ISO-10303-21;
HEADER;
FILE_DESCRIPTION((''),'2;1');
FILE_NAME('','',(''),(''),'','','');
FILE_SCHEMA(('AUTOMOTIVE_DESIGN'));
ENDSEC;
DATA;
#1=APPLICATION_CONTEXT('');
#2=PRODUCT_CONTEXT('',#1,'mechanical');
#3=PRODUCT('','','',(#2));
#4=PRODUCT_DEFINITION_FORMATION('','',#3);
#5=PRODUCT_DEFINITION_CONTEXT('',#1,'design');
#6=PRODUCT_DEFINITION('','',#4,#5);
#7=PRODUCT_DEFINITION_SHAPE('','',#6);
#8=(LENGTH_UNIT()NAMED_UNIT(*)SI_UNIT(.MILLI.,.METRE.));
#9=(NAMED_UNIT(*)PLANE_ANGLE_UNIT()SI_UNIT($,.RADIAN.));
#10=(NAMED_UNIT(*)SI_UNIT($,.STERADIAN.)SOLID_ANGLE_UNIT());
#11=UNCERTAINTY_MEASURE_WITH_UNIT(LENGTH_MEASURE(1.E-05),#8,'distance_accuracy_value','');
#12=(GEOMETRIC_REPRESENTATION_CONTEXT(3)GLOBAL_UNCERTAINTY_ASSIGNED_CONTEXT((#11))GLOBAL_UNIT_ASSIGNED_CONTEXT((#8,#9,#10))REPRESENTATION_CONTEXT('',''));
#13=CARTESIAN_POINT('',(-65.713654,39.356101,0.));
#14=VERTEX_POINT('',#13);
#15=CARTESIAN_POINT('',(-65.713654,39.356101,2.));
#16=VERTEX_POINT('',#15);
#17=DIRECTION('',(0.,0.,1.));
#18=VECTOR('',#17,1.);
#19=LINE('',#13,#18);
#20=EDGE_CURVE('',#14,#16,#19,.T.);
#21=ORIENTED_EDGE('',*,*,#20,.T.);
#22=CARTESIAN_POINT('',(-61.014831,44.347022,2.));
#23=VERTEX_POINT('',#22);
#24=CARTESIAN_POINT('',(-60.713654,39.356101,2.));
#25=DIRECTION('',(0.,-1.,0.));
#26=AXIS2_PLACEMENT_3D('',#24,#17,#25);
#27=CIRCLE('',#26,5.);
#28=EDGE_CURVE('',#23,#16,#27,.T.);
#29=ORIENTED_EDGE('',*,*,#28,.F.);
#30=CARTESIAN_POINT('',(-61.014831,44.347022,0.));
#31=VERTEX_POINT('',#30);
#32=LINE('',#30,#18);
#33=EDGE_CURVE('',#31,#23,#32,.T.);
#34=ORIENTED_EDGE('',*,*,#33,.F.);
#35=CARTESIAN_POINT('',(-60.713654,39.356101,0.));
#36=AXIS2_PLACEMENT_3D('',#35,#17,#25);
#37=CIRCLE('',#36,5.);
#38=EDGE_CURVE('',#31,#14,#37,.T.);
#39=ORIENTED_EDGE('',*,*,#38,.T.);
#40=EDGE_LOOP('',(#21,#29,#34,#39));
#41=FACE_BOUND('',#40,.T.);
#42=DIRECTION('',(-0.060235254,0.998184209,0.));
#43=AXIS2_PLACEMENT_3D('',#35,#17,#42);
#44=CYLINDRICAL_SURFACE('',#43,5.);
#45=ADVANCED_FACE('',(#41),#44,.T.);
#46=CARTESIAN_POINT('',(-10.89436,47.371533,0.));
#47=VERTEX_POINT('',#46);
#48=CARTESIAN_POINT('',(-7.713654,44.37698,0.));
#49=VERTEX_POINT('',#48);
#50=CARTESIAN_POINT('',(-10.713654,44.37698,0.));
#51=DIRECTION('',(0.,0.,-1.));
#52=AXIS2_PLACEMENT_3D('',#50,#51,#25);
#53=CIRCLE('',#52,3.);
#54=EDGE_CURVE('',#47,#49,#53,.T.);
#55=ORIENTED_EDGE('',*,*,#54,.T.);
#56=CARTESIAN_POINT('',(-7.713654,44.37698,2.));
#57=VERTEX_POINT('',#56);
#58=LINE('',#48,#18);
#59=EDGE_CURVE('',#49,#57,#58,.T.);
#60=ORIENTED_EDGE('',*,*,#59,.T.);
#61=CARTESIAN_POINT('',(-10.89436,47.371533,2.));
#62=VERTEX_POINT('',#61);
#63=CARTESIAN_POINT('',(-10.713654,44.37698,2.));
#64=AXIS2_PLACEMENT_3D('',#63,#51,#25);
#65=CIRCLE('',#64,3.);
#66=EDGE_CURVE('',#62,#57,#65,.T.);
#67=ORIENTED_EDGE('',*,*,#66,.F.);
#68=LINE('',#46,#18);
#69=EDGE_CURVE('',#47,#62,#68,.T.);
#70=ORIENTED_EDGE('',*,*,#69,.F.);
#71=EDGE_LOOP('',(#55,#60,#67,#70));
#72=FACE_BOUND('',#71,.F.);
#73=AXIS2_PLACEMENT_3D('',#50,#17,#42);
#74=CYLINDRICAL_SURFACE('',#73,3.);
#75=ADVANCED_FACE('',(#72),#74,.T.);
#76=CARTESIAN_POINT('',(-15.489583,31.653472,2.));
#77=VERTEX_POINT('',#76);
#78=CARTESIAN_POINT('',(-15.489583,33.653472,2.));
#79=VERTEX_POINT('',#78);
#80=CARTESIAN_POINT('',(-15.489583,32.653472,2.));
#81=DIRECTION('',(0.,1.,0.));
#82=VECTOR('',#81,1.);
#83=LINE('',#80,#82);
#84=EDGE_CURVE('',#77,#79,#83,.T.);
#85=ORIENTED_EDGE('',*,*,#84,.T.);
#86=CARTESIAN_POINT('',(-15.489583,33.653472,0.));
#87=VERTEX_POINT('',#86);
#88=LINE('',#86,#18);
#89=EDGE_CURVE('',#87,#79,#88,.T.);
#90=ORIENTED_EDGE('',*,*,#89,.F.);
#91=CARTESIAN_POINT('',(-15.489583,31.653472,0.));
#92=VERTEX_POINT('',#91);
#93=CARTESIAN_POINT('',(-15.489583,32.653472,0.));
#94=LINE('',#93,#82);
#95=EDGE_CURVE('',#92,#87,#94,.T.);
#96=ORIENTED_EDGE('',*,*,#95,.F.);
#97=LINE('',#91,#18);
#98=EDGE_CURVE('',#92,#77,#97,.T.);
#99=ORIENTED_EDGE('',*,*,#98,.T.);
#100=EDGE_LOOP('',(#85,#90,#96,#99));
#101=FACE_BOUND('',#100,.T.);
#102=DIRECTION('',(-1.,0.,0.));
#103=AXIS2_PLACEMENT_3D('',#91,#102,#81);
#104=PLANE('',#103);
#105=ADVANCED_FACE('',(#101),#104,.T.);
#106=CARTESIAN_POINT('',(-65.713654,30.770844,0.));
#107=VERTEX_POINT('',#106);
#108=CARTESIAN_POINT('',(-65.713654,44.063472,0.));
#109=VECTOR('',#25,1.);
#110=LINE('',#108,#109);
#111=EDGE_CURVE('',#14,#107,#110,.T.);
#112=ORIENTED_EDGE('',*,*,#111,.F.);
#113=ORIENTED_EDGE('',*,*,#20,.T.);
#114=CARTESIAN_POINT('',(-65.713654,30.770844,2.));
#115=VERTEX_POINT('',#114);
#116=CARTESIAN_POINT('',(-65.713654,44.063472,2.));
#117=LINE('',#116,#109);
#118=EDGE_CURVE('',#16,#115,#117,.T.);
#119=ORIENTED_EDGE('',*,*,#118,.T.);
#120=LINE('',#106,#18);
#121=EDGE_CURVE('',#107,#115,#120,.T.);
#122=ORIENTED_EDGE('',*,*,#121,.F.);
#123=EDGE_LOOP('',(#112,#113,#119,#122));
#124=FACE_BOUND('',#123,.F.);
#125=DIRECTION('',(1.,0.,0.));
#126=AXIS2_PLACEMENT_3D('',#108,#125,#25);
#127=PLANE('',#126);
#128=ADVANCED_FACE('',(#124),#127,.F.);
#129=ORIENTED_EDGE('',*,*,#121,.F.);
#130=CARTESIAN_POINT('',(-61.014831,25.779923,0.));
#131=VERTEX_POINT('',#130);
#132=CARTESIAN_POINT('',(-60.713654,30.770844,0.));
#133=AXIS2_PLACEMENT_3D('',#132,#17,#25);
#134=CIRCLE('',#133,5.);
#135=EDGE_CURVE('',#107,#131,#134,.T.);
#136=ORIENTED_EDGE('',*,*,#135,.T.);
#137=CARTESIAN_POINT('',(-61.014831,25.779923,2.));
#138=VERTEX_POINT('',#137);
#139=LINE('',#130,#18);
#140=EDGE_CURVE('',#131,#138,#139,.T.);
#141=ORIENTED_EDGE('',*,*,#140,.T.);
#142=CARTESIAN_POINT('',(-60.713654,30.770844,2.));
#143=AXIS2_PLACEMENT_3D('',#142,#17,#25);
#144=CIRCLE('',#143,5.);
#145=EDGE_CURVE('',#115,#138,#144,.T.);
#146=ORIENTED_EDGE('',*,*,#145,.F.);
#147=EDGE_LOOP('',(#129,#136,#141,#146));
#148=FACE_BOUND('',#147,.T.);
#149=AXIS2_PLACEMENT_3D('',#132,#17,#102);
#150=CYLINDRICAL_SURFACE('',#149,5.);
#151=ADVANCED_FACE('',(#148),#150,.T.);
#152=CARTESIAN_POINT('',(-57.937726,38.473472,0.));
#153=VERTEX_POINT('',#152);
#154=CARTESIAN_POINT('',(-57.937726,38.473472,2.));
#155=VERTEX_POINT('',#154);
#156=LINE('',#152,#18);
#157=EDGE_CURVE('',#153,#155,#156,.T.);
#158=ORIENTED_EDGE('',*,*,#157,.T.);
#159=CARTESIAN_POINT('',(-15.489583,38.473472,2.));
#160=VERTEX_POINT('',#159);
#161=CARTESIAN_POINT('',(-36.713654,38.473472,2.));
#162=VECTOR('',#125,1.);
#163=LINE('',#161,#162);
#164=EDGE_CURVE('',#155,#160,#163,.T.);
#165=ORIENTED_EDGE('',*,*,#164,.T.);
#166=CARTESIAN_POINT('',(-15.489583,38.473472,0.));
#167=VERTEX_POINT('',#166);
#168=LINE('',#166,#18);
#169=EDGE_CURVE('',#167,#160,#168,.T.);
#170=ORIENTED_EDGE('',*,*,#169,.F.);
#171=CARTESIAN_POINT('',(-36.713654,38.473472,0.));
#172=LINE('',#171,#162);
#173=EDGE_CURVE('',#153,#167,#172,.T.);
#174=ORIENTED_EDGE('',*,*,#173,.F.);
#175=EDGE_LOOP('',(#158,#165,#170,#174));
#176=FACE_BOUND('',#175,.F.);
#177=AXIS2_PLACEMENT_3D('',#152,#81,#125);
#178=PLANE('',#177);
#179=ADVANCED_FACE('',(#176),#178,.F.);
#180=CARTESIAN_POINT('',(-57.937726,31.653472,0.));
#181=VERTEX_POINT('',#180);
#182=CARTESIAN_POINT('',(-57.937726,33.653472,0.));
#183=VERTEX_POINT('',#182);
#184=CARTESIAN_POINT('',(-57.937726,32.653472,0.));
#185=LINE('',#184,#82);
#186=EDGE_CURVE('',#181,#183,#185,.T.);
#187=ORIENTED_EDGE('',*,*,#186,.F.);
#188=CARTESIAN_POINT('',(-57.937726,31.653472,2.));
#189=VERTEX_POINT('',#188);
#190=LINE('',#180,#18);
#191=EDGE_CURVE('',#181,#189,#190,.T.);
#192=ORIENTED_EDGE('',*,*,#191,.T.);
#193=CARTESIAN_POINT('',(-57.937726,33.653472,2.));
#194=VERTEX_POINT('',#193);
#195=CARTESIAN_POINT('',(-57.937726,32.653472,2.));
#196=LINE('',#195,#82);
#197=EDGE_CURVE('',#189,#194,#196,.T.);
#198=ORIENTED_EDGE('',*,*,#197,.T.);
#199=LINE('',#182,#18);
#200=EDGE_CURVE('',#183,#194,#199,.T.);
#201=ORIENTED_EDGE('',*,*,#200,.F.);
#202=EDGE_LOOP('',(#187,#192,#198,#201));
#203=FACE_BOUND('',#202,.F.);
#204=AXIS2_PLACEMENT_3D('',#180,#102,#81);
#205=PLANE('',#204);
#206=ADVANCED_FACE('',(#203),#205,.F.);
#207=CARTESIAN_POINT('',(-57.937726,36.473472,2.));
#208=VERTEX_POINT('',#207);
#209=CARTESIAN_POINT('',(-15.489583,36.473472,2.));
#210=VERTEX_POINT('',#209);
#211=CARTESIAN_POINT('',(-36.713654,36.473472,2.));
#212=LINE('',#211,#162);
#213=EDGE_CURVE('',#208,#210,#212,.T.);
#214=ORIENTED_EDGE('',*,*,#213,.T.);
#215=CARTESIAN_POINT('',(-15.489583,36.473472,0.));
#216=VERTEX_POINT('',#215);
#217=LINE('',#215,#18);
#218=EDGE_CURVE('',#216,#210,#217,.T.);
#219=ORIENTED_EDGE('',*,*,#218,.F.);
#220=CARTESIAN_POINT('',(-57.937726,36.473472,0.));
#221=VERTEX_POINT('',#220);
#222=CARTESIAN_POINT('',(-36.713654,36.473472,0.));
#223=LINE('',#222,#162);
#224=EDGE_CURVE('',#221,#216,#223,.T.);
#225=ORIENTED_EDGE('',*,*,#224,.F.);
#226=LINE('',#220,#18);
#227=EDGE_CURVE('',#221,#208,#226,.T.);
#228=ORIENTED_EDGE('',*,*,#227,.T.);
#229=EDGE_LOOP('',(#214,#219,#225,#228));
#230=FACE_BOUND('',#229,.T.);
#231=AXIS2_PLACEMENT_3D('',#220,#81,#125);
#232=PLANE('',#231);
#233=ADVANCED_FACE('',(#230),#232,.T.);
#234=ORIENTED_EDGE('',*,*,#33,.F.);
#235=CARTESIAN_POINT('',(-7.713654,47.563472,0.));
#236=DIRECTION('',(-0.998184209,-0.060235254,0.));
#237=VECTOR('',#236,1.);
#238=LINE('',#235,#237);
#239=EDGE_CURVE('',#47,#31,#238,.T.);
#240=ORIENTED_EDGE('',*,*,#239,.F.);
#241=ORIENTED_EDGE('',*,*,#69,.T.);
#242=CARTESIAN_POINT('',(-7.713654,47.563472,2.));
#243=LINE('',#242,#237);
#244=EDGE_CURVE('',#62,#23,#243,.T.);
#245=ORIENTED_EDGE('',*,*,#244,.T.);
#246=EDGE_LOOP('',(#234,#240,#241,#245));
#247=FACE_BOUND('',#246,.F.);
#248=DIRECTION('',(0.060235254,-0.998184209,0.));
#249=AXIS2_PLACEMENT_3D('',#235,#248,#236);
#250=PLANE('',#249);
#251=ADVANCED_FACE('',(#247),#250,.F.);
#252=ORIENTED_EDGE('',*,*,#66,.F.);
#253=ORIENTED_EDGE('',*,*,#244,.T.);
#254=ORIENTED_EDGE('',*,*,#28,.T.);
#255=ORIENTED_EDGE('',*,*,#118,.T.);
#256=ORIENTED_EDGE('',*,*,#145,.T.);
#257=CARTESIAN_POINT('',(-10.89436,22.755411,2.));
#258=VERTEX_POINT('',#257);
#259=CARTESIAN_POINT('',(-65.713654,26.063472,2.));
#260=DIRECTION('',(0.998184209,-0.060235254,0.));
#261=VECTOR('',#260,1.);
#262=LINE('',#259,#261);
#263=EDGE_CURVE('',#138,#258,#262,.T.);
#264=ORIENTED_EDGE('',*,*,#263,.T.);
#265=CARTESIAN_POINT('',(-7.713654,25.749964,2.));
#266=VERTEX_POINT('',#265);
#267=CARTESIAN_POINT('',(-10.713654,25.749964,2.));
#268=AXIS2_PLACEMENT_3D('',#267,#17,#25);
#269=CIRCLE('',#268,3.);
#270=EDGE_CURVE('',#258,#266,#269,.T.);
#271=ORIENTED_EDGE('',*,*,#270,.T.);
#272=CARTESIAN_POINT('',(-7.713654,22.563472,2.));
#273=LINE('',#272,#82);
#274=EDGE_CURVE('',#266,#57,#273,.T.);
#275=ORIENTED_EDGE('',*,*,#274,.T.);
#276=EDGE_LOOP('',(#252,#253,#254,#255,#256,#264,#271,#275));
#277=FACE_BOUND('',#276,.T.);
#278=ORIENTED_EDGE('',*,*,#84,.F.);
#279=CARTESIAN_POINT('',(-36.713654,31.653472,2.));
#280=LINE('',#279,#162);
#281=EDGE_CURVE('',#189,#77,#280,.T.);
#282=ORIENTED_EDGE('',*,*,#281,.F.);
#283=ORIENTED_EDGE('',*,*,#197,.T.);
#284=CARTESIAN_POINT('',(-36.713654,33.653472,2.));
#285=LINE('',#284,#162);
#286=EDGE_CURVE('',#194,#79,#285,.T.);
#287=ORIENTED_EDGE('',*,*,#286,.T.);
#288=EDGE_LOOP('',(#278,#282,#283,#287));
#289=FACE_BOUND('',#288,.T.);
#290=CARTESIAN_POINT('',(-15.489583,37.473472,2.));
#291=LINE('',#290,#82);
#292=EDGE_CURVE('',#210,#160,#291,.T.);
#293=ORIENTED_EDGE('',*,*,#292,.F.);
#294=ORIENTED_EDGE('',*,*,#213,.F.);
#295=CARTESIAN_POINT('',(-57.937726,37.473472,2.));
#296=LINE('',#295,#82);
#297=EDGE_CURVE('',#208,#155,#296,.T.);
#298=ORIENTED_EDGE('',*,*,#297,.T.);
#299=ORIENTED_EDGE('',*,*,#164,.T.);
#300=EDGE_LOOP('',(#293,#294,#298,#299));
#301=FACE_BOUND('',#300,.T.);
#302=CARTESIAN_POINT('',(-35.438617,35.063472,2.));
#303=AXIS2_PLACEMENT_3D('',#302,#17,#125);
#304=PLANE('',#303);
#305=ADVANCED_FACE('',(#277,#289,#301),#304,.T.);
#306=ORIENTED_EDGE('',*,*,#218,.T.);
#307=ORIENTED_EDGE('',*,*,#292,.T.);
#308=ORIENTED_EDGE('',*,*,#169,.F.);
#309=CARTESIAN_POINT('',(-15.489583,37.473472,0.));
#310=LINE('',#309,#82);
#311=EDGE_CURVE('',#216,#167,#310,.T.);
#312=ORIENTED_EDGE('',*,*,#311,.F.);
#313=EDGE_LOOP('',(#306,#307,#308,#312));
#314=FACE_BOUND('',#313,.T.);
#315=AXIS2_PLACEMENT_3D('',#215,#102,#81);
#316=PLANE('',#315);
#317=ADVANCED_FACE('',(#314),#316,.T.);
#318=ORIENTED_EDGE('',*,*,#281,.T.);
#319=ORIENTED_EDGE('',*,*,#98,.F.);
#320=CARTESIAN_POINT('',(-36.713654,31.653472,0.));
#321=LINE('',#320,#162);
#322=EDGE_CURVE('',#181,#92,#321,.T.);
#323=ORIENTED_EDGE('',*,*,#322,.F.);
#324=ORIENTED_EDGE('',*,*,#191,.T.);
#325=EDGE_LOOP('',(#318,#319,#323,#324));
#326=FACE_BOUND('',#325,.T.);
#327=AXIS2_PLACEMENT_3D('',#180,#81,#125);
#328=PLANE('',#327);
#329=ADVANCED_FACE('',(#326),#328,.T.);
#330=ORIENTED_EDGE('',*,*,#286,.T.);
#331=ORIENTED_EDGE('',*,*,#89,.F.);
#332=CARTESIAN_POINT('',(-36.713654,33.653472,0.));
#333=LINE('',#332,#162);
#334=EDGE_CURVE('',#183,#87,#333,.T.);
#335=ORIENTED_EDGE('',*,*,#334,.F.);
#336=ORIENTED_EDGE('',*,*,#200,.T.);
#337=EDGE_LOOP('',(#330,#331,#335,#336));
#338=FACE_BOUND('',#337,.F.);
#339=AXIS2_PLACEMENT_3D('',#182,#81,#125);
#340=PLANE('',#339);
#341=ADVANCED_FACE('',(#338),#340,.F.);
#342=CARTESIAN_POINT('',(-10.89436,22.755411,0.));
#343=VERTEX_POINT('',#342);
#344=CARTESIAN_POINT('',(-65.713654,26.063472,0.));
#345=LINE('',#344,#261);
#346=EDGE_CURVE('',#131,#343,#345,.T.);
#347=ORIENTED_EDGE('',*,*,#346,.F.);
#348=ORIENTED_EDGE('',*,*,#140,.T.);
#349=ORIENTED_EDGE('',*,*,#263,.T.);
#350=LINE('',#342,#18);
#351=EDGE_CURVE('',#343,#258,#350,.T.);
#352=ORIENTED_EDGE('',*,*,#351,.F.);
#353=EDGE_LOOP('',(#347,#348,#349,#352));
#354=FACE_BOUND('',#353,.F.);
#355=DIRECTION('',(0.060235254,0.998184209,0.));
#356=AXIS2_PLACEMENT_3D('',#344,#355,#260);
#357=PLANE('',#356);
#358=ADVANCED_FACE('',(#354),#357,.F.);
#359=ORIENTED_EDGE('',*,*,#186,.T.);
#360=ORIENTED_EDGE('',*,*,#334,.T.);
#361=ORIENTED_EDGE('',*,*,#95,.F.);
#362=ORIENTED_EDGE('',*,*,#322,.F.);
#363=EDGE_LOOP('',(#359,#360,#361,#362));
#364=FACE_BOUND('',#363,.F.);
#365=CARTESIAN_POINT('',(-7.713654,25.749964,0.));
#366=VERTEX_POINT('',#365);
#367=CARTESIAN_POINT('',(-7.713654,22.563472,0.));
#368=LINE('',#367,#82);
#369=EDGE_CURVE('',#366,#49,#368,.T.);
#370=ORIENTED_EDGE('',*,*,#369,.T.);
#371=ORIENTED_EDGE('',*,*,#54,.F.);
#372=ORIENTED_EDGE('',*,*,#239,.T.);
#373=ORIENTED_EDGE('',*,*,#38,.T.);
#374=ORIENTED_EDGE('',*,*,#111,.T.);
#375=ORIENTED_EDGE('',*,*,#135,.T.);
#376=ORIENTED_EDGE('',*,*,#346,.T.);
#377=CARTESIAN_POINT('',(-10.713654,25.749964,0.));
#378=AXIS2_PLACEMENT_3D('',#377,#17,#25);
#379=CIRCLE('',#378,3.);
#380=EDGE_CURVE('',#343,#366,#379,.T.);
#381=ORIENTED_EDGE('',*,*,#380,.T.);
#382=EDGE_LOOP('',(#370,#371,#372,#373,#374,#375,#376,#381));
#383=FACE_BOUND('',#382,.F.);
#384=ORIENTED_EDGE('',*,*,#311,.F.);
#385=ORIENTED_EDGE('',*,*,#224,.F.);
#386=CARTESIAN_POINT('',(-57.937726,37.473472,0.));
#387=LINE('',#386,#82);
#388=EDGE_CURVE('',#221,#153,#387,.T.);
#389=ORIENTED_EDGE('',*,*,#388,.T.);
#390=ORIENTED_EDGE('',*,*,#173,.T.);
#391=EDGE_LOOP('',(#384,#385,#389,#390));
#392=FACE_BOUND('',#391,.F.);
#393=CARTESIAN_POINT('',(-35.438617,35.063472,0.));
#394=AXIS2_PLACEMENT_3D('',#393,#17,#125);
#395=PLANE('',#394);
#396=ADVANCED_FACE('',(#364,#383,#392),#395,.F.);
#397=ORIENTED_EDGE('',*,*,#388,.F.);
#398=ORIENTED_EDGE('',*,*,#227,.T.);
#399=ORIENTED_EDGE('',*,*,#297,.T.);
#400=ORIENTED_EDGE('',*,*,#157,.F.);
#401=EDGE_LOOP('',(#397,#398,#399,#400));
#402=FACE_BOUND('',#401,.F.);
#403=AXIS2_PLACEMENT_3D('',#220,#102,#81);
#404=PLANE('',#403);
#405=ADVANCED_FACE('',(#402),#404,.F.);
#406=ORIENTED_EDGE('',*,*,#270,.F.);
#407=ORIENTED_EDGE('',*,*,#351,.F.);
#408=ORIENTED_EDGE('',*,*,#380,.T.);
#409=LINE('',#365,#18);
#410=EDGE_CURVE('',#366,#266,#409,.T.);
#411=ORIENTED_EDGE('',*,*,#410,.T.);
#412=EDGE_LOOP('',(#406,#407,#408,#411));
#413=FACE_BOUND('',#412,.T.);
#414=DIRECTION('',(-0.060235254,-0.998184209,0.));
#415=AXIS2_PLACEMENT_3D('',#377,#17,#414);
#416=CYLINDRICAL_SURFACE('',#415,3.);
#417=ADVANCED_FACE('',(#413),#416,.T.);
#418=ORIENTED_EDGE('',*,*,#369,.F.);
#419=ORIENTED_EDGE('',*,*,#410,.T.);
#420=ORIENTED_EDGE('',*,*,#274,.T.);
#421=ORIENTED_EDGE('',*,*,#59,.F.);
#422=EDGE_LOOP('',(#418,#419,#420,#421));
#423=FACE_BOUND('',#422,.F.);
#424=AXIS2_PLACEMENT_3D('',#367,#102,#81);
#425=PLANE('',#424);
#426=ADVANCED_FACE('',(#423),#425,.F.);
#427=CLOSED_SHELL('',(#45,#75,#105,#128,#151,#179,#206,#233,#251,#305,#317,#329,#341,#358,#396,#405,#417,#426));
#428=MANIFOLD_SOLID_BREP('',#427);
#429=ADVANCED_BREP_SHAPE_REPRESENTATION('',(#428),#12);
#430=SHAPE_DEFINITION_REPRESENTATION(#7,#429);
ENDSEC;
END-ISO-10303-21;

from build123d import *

# Parameters (mm, degrees)
F0_W     = 42.4481438452
F0_H     = 2
F1_DEPTH = 2
F2_R     = 3
F3_R     = 5


with BuildPart() as f1:
    # F0 (on Top) → F1 (new body)
    with BuildSketch(Plane.XY):
        Polygon((-65.7136544558, 44.0634722376), (-65.7136544558, 36.4734722376), (-65.7136544558, 35.0634722376), (-65.7136544558, 33.6534722376), (-65.7136544558, 26.0634722376), (-7.7136544558, 22.5634722376), (-7.7136544558, 47.5634722376), align=None)
        with Locations((-36.7136544558, 32.6534722376)):
            Rectangle(F0_W, F0_H, mode=Mode.SUBTRACT)
        with Locations((-36.7136544558, 37.4734722376)):
            Rectangle(F0_W, F0_H, mode=Mode.SUBTRACT)
    extrude(amount=F1_DEPTH)

    # F2
    f2_edges = [f1.edges().sort_by_distance(p)[0] for p in [
        (-7.713654, 47.563472, 1),
        (-7.713654, 22.563472, 1),
    ]]
    fillet(f2_edges, radius=F2_R)

    # F3
    f3_edges = [f1.edges().sort_by_distance(p)[0] for p in [
        (-65.713654, 26.063472, 1),
        (-65.713654, 44.063472, 1),
    ]]
    fillet(f3_edges, radius=F3_R)


solid = f1.part
